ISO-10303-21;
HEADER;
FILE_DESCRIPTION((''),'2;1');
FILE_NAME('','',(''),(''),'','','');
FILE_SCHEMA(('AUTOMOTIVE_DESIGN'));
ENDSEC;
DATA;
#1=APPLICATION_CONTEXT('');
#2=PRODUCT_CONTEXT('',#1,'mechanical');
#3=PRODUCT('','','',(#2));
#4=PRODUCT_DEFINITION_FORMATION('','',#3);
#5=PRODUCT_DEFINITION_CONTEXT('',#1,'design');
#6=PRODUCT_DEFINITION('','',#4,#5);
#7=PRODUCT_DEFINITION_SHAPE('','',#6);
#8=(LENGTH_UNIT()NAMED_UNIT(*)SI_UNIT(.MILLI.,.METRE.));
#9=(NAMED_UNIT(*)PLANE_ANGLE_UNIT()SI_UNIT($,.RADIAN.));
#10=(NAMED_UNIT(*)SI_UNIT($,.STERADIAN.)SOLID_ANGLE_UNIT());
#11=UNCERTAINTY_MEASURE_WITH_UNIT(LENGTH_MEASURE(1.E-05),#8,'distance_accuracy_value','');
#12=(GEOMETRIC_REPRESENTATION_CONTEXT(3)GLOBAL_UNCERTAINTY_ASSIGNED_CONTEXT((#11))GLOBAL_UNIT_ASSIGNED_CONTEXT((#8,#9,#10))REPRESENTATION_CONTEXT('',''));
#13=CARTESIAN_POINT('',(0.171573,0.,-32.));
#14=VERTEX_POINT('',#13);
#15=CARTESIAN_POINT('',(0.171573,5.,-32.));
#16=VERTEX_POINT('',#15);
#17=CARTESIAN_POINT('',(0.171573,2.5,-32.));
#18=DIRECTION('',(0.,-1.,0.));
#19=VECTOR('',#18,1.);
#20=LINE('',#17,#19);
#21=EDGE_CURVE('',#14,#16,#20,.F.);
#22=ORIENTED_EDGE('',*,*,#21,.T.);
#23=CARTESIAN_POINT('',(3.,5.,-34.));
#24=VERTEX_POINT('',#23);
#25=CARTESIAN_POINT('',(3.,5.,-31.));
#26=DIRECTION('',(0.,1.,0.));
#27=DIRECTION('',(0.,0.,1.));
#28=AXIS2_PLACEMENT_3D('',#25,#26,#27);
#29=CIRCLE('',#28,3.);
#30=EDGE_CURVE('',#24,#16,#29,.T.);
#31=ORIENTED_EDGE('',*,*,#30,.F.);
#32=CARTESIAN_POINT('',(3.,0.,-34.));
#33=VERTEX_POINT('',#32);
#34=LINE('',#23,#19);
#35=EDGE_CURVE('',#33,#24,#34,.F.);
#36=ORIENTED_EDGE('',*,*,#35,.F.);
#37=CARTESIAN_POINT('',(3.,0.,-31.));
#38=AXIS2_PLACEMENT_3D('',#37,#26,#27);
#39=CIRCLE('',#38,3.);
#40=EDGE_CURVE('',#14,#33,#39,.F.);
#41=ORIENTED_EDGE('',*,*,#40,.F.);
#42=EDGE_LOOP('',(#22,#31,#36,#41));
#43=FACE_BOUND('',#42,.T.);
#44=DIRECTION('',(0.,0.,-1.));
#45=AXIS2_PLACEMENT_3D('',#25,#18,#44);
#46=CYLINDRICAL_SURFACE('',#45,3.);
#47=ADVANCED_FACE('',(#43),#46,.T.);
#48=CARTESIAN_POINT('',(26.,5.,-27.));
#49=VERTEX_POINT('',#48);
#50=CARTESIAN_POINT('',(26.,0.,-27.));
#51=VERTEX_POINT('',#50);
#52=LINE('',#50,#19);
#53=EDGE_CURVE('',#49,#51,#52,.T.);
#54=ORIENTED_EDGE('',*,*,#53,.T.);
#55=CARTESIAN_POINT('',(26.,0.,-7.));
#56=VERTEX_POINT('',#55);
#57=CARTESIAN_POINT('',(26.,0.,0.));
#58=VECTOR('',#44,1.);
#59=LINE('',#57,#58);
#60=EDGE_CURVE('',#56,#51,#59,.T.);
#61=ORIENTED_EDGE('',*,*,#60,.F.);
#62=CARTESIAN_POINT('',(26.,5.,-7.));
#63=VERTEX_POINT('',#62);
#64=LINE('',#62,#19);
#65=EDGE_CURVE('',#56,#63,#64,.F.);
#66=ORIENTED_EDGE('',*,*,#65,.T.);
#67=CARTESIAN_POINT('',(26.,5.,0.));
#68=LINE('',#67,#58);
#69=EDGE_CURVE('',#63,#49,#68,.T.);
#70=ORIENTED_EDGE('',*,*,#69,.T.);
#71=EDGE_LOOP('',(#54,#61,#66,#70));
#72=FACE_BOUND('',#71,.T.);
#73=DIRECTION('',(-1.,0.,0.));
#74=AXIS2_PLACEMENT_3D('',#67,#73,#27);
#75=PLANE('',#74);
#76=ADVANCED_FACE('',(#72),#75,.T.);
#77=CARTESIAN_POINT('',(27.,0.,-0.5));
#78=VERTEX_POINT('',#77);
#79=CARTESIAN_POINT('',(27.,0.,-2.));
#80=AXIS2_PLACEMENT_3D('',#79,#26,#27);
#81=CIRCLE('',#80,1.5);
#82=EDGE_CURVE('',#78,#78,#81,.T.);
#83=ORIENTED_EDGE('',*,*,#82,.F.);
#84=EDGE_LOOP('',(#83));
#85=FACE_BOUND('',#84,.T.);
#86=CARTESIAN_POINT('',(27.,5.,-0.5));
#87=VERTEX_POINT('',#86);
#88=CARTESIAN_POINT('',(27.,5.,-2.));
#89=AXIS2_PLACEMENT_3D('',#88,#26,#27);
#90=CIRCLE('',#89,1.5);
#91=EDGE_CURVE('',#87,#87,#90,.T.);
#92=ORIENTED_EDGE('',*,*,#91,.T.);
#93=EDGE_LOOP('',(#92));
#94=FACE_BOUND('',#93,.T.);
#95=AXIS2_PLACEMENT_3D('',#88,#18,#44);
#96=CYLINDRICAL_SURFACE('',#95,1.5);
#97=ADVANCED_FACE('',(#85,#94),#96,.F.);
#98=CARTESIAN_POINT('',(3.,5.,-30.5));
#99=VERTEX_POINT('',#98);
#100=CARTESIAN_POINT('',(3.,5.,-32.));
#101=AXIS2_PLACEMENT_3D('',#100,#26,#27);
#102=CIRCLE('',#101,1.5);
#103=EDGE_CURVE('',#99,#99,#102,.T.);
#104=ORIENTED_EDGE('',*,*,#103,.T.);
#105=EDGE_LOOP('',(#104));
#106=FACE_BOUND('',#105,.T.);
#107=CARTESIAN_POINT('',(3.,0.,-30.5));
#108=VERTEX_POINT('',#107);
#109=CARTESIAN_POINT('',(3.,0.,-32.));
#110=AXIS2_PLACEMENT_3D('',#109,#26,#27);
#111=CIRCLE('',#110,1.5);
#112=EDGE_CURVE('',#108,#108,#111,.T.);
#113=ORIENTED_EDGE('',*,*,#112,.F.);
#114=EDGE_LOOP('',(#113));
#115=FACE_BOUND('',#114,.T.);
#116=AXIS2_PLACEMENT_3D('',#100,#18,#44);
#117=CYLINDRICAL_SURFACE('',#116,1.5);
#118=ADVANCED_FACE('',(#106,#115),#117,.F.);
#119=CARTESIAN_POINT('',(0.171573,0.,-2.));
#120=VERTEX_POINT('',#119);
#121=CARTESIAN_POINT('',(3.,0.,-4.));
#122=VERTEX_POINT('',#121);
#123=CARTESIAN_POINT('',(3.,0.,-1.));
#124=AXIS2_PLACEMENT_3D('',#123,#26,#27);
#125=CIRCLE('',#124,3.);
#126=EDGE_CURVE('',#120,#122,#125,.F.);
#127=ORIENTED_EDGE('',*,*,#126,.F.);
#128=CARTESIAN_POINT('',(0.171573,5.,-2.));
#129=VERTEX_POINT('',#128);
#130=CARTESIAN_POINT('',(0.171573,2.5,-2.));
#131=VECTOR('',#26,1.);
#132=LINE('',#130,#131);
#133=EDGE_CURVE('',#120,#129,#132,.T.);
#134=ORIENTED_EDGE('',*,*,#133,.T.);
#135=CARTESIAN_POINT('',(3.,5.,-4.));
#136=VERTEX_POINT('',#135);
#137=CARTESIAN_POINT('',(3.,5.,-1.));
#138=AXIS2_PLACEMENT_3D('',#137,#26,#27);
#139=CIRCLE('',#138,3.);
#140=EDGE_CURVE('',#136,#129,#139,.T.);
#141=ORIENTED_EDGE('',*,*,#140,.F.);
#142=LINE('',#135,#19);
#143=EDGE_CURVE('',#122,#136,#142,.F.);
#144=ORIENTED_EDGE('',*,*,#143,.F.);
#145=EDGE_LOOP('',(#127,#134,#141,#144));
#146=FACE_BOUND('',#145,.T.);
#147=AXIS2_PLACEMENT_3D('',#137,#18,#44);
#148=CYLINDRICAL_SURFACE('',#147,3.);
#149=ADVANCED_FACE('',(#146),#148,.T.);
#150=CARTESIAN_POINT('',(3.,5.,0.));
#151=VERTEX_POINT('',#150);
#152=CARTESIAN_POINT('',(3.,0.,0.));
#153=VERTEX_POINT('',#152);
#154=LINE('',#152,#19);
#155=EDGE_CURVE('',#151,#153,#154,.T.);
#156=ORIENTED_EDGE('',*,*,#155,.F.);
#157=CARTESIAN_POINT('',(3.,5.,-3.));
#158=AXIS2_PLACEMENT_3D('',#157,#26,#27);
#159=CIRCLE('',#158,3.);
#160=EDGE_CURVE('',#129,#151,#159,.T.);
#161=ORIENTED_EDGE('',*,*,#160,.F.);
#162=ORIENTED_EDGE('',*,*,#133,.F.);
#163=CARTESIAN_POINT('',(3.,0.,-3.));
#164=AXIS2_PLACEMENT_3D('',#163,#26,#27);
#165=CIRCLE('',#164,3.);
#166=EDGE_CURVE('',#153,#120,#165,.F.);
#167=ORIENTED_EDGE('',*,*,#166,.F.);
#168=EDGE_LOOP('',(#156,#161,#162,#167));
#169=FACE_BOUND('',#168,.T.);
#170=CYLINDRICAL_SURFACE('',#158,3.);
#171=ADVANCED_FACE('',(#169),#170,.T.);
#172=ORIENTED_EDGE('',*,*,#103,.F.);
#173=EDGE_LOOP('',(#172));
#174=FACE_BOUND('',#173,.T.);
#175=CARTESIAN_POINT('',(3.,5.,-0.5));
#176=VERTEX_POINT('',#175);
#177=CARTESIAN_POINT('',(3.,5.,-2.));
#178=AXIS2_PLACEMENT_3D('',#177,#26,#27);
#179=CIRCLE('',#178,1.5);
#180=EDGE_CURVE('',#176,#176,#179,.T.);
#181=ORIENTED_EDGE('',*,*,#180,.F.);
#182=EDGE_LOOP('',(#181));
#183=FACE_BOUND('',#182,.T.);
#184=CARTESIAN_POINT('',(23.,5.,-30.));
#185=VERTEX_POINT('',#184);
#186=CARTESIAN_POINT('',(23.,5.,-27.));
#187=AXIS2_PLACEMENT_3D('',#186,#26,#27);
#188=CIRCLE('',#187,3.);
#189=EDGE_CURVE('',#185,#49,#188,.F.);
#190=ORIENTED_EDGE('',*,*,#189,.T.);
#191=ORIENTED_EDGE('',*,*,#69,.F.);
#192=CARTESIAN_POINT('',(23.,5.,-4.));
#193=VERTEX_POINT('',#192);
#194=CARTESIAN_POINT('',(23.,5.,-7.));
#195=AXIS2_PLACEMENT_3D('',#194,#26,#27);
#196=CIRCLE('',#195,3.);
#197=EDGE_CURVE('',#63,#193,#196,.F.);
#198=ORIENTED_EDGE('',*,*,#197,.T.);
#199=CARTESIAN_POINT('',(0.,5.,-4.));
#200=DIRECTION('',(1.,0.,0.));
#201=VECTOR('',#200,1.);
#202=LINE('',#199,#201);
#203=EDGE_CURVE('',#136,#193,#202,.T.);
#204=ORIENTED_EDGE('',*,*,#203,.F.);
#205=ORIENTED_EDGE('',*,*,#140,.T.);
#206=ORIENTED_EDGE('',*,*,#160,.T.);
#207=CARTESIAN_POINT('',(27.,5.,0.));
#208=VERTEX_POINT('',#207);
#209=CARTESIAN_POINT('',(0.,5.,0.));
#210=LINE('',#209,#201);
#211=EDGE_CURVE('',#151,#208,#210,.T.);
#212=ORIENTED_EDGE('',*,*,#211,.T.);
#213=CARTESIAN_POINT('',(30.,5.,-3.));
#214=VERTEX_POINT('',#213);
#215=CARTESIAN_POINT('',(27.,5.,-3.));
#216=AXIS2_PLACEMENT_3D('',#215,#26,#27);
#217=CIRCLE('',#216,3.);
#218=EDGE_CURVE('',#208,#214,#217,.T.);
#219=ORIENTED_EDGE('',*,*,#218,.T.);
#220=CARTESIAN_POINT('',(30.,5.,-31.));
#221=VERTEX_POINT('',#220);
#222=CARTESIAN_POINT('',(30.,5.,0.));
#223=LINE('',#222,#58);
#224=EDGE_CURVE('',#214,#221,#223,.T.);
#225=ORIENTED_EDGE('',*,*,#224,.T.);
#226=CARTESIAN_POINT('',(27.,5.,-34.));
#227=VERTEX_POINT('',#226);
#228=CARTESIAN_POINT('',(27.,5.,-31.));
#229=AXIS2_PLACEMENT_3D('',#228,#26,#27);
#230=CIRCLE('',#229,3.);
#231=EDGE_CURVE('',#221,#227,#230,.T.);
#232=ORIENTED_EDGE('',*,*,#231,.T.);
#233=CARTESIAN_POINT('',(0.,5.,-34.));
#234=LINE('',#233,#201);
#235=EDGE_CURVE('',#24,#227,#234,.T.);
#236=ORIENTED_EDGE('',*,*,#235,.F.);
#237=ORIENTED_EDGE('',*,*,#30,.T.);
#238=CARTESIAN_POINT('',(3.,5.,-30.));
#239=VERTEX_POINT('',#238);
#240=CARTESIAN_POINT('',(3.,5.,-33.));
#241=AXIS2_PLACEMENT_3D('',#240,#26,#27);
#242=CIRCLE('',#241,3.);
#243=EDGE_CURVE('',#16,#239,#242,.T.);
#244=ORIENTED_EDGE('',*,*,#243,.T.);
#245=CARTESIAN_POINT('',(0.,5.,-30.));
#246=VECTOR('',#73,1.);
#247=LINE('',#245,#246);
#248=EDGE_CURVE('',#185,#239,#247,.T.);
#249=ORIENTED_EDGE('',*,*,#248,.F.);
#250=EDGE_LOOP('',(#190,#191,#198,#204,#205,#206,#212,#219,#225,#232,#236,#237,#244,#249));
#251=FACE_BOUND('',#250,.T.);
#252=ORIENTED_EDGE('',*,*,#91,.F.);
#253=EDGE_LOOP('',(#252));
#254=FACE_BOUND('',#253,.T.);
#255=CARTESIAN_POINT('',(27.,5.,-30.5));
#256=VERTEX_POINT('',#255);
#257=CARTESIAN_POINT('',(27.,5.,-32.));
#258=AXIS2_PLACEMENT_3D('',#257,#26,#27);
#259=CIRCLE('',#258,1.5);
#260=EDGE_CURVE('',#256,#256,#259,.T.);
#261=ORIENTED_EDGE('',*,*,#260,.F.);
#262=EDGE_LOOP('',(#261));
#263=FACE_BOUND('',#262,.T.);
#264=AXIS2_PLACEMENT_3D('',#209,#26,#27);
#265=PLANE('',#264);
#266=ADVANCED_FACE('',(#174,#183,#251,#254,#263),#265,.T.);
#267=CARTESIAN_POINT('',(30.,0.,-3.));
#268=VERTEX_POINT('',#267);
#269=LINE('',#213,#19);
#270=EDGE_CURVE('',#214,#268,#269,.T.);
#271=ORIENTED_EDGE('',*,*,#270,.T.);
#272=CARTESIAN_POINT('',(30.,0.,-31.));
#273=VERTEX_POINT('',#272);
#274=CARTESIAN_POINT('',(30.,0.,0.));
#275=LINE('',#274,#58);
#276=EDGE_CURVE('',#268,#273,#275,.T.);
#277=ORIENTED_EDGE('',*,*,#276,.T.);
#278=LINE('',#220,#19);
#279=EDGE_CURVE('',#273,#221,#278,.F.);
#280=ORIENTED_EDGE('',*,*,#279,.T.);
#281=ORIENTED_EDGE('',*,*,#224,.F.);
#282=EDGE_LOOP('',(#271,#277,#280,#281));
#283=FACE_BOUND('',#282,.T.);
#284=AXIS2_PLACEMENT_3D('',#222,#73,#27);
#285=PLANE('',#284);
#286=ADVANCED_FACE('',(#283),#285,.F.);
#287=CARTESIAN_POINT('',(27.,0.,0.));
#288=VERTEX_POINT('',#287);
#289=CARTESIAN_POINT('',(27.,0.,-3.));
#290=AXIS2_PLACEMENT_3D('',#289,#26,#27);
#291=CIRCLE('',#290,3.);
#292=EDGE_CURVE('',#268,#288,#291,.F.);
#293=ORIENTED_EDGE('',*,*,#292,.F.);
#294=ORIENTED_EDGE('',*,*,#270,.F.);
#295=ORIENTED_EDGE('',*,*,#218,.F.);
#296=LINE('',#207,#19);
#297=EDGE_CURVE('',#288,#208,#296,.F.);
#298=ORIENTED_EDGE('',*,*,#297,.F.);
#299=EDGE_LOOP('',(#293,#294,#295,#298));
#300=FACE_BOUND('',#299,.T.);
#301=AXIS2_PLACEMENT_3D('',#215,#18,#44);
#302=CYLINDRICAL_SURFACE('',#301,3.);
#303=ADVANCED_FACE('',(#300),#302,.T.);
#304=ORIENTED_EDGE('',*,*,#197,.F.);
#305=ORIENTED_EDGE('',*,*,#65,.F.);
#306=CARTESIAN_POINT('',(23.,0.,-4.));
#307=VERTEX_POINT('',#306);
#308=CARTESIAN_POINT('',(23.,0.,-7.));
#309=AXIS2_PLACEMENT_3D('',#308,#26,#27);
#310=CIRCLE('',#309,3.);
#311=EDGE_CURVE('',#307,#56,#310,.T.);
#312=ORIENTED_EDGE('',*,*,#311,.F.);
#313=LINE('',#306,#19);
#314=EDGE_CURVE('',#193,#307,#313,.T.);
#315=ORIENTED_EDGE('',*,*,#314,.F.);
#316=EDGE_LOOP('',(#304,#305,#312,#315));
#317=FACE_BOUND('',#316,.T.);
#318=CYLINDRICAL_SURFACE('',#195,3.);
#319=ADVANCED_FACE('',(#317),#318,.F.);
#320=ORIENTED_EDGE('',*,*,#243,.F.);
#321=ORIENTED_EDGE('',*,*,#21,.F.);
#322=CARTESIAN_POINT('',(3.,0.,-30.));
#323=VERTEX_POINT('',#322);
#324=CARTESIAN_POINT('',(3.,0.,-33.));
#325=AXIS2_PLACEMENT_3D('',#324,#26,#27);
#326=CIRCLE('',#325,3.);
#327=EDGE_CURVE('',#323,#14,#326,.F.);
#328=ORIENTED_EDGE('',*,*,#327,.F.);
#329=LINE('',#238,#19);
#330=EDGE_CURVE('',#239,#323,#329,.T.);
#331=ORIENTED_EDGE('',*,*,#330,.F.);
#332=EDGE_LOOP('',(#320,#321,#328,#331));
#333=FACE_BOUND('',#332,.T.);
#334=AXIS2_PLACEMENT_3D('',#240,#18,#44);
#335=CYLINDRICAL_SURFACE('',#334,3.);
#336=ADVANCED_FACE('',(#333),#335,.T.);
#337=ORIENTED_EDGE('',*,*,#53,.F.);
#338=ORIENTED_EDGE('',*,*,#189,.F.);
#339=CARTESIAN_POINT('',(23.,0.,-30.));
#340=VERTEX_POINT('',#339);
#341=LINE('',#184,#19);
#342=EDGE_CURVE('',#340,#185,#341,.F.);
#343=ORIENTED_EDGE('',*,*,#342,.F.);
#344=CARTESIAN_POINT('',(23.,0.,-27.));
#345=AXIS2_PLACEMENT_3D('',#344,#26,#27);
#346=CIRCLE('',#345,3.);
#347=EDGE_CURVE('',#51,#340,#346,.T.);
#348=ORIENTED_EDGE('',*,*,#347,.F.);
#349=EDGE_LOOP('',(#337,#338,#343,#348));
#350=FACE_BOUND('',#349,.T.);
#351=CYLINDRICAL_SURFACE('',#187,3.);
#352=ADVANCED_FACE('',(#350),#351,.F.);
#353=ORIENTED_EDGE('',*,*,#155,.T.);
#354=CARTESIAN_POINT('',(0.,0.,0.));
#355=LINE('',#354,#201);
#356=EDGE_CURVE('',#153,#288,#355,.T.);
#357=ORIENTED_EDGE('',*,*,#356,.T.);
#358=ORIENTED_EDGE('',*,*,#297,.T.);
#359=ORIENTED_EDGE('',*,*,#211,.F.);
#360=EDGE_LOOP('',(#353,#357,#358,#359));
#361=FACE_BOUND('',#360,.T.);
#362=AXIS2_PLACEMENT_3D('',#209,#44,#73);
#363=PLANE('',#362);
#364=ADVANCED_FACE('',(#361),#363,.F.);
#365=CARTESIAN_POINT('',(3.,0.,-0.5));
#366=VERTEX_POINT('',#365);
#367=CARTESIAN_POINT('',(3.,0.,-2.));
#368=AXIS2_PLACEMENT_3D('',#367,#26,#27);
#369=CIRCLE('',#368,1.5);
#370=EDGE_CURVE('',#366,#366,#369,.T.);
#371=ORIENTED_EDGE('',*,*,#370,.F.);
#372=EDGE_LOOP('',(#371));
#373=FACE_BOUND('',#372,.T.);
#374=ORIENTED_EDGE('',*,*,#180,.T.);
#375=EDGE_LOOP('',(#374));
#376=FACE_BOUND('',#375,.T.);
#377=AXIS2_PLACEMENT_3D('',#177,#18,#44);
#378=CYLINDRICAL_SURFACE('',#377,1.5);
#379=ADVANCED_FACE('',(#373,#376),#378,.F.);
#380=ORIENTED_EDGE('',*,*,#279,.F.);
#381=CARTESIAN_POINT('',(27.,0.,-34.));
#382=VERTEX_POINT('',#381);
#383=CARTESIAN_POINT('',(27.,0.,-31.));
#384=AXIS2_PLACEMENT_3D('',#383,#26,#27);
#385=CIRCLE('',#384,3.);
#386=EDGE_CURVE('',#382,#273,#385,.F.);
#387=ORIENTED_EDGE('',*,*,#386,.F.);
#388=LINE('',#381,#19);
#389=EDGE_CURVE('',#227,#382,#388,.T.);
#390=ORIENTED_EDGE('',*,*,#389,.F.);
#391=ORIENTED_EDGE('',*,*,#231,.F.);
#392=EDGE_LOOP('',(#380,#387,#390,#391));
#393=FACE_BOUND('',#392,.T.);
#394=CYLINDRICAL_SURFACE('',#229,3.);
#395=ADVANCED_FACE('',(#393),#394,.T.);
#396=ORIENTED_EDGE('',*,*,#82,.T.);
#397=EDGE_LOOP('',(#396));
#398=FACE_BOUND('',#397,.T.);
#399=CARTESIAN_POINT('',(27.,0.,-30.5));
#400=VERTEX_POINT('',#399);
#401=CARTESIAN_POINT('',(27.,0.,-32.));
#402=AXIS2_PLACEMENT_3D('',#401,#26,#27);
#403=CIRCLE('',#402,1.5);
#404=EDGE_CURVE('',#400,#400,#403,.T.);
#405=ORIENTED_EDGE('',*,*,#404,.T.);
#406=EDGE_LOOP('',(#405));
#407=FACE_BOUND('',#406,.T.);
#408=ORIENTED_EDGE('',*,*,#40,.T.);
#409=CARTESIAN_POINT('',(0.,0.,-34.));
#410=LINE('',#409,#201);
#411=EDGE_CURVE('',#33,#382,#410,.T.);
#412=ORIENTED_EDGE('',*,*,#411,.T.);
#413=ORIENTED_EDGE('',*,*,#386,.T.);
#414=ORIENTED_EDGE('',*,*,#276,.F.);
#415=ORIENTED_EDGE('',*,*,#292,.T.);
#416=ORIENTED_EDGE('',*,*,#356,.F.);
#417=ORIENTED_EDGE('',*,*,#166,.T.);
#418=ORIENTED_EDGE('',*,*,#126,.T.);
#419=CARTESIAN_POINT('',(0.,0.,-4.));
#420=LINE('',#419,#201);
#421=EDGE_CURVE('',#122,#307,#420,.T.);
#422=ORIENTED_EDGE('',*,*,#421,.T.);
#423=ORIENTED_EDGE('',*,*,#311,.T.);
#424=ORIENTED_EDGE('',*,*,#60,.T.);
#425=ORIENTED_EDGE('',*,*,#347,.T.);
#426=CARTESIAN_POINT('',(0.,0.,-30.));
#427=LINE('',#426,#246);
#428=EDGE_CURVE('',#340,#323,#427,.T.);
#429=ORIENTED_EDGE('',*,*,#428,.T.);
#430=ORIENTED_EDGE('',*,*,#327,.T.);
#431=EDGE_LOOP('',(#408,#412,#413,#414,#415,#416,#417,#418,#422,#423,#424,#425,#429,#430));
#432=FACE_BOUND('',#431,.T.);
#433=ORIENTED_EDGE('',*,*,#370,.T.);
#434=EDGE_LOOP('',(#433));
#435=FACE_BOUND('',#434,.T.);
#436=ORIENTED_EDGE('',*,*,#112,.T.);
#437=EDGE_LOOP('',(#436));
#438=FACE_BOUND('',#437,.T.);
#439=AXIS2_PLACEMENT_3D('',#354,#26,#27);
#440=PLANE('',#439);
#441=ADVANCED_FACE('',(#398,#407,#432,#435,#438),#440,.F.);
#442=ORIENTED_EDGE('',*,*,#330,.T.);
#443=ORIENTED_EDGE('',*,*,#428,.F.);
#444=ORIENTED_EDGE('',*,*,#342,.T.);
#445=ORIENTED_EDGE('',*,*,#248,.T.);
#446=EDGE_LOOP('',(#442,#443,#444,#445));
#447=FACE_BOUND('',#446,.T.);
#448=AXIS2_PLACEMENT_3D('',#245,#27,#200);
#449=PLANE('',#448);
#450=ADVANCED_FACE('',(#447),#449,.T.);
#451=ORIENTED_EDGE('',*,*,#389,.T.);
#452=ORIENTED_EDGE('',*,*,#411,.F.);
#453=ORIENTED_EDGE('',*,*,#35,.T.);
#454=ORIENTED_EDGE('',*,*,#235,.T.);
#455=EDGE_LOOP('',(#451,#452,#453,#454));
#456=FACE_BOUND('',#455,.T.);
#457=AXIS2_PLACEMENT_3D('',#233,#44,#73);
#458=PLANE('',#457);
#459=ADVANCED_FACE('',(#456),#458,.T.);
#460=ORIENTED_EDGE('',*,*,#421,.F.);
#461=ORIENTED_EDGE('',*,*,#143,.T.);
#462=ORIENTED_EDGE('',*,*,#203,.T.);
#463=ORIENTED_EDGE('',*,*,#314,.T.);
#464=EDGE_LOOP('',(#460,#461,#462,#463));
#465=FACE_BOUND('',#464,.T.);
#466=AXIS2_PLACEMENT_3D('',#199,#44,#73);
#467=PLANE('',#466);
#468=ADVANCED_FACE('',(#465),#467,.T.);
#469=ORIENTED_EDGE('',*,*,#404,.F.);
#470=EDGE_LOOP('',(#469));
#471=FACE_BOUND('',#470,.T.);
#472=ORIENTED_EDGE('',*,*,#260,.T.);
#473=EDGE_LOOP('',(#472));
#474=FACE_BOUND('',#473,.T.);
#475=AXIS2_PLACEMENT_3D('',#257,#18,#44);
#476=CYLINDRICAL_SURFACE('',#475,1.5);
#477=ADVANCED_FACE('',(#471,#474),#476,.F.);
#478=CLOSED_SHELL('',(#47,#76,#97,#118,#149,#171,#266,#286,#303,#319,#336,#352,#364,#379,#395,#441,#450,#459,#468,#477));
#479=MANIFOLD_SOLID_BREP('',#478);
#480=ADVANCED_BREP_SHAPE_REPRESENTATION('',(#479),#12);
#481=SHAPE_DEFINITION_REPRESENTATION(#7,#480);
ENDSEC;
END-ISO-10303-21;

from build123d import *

# Parameters (mm, degrees)
SKETCH1_R           = 1.5
BOSS_EXTRUDE1_DEPTH = 5
FILLET2_R           = 3


with BuildPart() as part:
    # Sketch1 → Boss-Extrude1 (new body)
    with BuildSketch(Plane(origin=(0, 0, 0), x_dir=(1, 0, 0), z_dir=(0, 1, 0))):
        Polygon((0, 30), (0, 34), (30, 34), (30, 0), (0, 0), (0, 4), (26, 4), (26, 30), align=None)
        with Locations(Location((27, 2, 0), (0, 0, 270))):
            Circle(SKETCH1_R, mode=Mode.SUBTRACT)
        with Locations(Location((27, 32, 0), (0, 0, 270))):
            Circle(SKETCH1_R, mode=Mode.SUBTRACT)
        with Locations(Location((3, 32, 0), (0, 0, 270))):
            Circle(SKETCH1_R, mode=Mode.SUBTRACT)
        with Locations(Location((3, 2, 0), (0, 0, 270))):
            Circle(SKETCH1_R, mode=Mode.SUBTRACT)
    extrude(amount=BOSS_EXTRUDE1_DEPTH)

    # Fillet2
    # the kernel refuses this fillet: 3 mm, written as the material it adds along each edge
    with BuildSketch(Plane(origin=(26, 0, -30), x_dir=(0, 0, 1), z_dir=(0, 1, 0)), Plane(origin=(26, 0, -4), x_dir=(-1, 0, 0), z_dir=(0, 1, 0))) as fillet2_piece_1:
        with BuildLine():
            CenterArc((FILLET2_R, -FILLET2_R), FILLET2_R, 90, 90)
            Line((0, -FILLET2_R), (0, 0))
            Line((0, 0), (FILLET2_R, 0))
        make_face()
    extrude(amount=5)
    # the kernel refuses this fillet: 3 mm, written as the material it takes off along each edge
    with BuildSketch(Plane(origin=(30, -7.5, -34), x_dir=(-1, 0, 0), z_dir=(0, 1, 0)), Plane(origin=(0, -7.5, -34), x_dir=(0, 0, 1), z_dir=(0, 1, 0)), Plane(origin=(0, -7.5, -4), x_dir=(0, 0, 1), z_dir=(0, 1, 0)), Plane(origin=(0, -7.5, 0), x_dir=(1, 0, 0), z_dir=(0, 1, 0)), Plane(origin=(30, -7.5, 0), x_dir=(0, 0, -1), z_dir=(0, 1, 0))) as fillet2_2_piece_1:
        with BuildLine():
            CenterArc((FILLET2_R, FILLET2_R), FILLET2_R, 180, 90)
            Line((0, FILLET2_R), (0, 0))
            Line((0, 0), (FILLET2_R, 0))
        make_face()
    extrude(amount=20, mode=Mode.SUBTRACT)
    with BuildSketch(Plane(origin=(0, -7.5, -30), x_dir=(0, 0, -1), z_dir=(0, 1, 0))) as fillet2_2_piece_2:
        with BuildLine():
            CenterArc((FILLET2_R, -FILLET2_R), FILLET2_R, 90, 90)
            Line((0, -FILLET2_R), (0, 0))
            Line((0, 0), (FILLET2_R, 0))
        make_face()
    extrude(amount=20, mode=Mode.SUBTRACT)


solid = part.part
